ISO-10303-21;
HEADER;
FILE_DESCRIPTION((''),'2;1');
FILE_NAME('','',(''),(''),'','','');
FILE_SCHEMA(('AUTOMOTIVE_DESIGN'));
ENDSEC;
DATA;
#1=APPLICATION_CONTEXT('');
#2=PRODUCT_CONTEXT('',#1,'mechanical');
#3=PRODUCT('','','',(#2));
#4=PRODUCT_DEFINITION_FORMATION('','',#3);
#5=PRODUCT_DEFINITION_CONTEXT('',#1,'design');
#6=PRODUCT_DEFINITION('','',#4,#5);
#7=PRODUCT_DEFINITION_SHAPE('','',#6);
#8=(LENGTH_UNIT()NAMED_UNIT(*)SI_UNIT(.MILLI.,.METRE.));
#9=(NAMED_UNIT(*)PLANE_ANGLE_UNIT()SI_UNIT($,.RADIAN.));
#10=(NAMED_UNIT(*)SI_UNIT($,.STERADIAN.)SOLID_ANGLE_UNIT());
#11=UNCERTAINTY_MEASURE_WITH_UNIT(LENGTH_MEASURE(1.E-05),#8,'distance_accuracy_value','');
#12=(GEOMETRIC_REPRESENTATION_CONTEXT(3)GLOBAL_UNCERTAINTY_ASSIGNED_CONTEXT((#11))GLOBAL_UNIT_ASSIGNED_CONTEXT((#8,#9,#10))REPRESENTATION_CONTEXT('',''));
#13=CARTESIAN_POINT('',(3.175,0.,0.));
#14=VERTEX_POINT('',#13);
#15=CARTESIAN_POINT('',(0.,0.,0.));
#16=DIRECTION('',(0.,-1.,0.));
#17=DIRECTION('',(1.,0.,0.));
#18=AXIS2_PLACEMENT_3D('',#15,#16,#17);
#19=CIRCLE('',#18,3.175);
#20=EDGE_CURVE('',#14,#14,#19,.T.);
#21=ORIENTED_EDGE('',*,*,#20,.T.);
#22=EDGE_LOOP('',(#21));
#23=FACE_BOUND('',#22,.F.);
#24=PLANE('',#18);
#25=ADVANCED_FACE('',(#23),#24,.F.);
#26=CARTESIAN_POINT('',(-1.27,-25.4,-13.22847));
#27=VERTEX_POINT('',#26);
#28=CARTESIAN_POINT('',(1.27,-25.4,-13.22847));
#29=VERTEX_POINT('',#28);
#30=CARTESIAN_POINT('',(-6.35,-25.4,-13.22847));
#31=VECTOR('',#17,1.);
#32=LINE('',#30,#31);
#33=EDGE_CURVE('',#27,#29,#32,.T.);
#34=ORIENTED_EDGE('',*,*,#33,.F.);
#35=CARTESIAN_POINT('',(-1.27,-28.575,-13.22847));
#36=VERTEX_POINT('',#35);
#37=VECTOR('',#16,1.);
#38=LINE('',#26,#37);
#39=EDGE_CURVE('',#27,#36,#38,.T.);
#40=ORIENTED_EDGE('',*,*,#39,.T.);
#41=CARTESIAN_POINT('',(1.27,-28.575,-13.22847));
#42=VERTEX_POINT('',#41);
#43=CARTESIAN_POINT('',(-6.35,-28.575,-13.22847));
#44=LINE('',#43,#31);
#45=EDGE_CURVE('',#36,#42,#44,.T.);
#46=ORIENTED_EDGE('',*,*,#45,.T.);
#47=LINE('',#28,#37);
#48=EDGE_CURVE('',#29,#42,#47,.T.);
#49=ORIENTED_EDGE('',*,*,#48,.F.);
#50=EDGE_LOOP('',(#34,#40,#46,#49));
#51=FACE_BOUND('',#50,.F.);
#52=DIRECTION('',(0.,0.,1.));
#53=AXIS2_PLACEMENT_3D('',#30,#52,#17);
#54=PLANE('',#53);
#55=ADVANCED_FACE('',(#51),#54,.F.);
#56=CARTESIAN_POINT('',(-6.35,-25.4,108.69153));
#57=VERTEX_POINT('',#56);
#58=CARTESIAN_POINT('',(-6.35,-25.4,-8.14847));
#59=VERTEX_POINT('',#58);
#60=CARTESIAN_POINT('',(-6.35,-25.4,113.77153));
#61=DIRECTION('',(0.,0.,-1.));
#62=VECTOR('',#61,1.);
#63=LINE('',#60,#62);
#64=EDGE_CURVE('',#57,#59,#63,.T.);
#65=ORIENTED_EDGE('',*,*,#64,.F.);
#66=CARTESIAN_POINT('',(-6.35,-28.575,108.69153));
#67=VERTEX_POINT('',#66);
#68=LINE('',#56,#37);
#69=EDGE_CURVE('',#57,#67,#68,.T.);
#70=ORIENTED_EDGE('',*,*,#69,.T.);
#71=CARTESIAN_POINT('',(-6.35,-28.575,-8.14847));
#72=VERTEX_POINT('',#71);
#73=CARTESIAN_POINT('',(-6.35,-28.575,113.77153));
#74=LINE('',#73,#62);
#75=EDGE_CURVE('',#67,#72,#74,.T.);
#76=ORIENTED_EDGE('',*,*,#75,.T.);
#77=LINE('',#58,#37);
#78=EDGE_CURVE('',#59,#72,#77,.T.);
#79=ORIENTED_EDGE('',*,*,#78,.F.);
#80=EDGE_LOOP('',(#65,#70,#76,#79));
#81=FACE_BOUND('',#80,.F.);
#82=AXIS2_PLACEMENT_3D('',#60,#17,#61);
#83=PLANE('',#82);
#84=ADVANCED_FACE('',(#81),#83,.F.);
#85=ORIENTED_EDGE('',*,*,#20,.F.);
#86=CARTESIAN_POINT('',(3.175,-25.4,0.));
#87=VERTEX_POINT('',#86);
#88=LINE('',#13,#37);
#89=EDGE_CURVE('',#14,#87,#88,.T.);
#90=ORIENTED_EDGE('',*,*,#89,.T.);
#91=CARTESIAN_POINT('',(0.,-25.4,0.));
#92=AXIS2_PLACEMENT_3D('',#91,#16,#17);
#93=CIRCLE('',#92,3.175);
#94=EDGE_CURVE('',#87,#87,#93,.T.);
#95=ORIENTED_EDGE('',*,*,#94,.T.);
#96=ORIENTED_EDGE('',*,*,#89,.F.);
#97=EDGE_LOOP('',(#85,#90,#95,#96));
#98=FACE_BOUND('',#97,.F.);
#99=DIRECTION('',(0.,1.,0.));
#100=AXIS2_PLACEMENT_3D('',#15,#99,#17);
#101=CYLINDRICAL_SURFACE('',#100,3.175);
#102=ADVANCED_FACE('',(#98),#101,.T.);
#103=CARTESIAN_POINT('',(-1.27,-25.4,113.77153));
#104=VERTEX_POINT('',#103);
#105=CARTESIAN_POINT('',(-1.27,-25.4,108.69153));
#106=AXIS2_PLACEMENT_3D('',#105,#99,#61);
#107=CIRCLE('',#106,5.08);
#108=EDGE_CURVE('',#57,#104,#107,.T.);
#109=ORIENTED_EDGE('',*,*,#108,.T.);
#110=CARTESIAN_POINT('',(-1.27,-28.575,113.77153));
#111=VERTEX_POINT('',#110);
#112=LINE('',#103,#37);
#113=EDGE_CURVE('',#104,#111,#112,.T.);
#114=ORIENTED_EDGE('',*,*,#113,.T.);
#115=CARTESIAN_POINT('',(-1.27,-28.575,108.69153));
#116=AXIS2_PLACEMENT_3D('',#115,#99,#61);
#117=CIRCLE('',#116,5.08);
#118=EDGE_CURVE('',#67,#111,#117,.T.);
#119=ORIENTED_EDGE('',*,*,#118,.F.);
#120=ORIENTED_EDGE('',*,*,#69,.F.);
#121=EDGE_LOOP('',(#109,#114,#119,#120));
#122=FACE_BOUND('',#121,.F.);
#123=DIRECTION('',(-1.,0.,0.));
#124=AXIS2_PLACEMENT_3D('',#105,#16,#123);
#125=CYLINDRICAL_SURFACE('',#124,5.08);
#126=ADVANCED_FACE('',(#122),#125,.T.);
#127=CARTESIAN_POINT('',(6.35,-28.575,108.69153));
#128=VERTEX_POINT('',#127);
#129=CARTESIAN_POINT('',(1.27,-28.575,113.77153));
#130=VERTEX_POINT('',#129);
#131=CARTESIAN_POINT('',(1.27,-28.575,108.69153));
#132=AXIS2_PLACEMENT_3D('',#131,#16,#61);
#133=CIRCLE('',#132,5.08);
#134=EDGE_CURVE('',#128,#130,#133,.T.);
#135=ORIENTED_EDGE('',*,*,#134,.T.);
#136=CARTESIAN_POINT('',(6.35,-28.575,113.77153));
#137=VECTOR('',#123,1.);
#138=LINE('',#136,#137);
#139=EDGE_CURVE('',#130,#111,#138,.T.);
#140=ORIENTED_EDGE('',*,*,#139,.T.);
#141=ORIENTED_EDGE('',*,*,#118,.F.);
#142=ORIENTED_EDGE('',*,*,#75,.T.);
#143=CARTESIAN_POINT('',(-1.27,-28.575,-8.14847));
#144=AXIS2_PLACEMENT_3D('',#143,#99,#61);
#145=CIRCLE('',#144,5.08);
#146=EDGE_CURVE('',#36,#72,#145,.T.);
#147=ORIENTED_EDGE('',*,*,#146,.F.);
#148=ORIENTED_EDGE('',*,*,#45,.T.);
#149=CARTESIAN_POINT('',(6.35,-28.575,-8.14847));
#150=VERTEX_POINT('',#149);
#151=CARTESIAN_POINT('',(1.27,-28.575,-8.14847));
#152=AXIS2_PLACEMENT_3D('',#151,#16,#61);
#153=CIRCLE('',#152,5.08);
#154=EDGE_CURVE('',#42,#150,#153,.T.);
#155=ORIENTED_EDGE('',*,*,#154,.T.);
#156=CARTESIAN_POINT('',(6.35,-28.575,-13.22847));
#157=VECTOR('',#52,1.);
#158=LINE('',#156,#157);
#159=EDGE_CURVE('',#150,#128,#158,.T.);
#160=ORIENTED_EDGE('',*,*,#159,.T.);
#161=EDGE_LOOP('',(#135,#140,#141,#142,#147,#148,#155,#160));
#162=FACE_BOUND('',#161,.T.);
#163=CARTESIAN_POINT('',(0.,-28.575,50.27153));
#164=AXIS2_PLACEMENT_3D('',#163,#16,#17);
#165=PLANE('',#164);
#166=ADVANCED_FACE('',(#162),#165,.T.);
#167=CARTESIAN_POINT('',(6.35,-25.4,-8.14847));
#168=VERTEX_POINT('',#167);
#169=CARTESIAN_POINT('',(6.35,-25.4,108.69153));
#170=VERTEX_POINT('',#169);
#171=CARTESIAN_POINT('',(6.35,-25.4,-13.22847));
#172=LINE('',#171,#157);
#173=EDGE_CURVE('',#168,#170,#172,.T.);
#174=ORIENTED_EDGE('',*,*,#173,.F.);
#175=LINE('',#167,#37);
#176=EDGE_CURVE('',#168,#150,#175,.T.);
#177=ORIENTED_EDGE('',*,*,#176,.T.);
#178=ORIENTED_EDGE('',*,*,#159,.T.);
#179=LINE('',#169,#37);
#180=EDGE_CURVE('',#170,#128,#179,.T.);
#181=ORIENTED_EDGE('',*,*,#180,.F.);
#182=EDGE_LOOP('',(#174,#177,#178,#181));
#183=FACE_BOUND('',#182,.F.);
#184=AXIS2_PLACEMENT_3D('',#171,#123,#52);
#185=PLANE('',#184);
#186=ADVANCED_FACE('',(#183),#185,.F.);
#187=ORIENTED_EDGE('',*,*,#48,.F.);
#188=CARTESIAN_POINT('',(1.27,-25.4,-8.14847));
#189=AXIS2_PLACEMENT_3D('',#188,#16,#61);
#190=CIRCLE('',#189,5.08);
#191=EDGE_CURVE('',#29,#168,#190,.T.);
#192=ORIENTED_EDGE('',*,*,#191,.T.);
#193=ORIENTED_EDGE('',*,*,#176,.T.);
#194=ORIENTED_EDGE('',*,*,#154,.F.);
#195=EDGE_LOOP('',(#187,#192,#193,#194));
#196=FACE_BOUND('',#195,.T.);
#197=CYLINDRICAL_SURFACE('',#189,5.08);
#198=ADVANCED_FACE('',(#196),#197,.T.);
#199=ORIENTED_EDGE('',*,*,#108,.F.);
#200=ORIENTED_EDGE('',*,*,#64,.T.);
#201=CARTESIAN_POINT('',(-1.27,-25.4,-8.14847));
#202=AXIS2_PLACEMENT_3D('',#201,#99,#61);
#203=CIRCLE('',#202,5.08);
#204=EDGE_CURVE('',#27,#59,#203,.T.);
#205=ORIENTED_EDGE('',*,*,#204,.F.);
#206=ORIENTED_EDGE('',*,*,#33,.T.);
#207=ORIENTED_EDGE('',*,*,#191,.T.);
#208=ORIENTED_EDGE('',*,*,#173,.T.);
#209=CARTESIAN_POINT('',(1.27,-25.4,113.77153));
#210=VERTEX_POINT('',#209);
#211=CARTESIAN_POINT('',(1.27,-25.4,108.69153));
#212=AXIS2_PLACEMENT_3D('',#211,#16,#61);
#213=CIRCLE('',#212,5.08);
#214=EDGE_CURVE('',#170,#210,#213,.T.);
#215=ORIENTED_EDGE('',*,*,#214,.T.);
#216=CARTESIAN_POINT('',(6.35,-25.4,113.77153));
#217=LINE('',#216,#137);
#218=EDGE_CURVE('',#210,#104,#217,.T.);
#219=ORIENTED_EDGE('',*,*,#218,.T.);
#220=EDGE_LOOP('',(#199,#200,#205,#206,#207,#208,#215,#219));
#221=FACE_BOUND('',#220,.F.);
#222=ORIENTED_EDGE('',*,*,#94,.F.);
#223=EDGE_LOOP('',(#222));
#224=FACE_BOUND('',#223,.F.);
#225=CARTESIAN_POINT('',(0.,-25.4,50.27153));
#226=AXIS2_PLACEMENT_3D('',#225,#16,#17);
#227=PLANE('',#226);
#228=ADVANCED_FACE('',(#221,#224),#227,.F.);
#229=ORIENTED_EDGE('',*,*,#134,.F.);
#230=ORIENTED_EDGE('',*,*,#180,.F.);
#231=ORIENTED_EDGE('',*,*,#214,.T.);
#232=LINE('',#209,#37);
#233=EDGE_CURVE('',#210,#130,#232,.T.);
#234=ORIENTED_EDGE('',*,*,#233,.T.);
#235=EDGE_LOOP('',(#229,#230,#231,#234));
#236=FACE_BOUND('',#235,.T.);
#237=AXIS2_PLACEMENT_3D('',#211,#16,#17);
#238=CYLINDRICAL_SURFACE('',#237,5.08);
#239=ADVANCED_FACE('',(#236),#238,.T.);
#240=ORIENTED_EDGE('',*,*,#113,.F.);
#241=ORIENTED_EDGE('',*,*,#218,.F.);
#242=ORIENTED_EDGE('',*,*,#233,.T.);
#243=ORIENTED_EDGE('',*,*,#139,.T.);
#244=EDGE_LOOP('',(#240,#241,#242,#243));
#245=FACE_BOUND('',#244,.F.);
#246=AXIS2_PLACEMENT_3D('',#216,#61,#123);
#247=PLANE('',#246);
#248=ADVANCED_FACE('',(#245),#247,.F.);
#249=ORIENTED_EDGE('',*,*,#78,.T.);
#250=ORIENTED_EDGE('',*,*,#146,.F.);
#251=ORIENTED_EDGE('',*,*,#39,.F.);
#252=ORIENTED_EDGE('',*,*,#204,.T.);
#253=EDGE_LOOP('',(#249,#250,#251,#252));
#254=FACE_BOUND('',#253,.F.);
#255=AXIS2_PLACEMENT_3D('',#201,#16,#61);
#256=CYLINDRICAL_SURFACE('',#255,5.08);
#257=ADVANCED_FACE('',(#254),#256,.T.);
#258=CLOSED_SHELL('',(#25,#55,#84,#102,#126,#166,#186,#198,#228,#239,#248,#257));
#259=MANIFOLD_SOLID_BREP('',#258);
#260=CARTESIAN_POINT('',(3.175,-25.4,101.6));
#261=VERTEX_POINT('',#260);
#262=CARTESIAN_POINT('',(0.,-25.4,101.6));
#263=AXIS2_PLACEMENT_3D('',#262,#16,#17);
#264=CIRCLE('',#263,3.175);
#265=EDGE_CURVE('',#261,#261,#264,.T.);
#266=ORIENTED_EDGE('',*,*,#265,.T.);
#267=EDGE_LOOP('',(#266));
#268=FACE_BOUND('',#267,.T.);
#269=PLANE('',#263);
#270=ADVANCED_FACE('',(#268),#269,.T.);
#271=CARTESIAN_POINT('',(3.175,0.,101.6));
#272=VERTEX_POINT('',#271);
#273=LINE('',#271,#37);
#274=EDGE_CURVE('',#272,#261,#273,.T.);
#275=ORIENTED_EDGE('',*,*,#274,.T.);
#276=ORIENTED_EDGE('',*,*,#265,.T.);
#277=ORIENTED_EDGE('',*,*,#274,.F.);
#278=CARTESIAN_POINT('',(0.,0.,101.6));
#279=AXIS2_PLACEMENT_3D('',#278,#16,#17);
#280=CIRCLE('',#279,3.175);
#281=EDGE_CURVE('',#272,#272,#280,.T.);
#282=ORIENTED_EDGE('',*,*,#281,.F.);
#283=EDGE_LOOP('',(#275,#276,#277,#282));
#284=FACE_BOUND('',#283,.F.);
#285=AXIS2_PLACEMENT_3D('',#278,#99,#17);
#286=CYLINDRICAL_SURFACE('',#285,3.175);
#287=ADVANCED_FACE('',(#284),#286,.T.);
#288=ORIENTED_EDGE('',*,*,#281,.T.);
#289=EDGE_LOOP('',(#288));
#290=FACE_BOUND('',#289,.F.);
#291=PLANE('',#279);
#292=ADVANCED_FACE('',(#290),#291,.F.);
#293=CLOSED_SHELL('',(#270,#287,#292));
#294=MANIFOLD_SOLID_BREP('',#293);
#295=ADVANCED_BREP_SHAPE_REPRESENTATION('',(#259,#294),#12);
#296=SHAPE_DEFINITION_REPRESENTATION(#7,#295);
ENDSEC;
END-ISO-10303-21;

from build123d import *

# Parameters (mm, degrees)
F0_R     = 3.175
F1_DEPTH = 25.4
F3_DEPTH = 3.175
F4_R     = 5.08


with BuildPart() as f1:
    # F0 (on Front) → F1 (new body)
    with BuildSketch(Plane.XZ):
        with Locations((0, 101.6)):
            Circle(F0_R)
    extrude(amount=F1_DEPTH)


with BuildPart() as f1b:
    # F0 (on Front) → F1, piece 2 (new body)
    with BuildSketch(Plane.XZ):
        Circle(F0_R)
    extrude(amount=F1_DEPTH)

    # F2 (on face) → F3 (join)
    with BuildSketch(Plane.XZ.offset(25.4)):
        Polygon((-6.35, -13.2284704596), (0, -13.2284704596), (6.35, -13.2284704596), (6.35, 113.7715295404), (0, 113.7715295404), (-6.35, 113.7715295404), align=None)
    extrude(amount=F3_DEPTH)

    # F4
    f4_edges = [f1b.edges().sort_by_distance(p)[0] for p in [
        (-6.35, -26.9875, 113.77153),
        (6.35, -26.9875, 113.77153),
        (6.35, -26.9875, -13.22847),
        (-6.35, -26.9875, -13.22847),
    ]]
    fillet(f4_edges, radius=F4_R)


solid = Compound([f1.part, f1b.part])
